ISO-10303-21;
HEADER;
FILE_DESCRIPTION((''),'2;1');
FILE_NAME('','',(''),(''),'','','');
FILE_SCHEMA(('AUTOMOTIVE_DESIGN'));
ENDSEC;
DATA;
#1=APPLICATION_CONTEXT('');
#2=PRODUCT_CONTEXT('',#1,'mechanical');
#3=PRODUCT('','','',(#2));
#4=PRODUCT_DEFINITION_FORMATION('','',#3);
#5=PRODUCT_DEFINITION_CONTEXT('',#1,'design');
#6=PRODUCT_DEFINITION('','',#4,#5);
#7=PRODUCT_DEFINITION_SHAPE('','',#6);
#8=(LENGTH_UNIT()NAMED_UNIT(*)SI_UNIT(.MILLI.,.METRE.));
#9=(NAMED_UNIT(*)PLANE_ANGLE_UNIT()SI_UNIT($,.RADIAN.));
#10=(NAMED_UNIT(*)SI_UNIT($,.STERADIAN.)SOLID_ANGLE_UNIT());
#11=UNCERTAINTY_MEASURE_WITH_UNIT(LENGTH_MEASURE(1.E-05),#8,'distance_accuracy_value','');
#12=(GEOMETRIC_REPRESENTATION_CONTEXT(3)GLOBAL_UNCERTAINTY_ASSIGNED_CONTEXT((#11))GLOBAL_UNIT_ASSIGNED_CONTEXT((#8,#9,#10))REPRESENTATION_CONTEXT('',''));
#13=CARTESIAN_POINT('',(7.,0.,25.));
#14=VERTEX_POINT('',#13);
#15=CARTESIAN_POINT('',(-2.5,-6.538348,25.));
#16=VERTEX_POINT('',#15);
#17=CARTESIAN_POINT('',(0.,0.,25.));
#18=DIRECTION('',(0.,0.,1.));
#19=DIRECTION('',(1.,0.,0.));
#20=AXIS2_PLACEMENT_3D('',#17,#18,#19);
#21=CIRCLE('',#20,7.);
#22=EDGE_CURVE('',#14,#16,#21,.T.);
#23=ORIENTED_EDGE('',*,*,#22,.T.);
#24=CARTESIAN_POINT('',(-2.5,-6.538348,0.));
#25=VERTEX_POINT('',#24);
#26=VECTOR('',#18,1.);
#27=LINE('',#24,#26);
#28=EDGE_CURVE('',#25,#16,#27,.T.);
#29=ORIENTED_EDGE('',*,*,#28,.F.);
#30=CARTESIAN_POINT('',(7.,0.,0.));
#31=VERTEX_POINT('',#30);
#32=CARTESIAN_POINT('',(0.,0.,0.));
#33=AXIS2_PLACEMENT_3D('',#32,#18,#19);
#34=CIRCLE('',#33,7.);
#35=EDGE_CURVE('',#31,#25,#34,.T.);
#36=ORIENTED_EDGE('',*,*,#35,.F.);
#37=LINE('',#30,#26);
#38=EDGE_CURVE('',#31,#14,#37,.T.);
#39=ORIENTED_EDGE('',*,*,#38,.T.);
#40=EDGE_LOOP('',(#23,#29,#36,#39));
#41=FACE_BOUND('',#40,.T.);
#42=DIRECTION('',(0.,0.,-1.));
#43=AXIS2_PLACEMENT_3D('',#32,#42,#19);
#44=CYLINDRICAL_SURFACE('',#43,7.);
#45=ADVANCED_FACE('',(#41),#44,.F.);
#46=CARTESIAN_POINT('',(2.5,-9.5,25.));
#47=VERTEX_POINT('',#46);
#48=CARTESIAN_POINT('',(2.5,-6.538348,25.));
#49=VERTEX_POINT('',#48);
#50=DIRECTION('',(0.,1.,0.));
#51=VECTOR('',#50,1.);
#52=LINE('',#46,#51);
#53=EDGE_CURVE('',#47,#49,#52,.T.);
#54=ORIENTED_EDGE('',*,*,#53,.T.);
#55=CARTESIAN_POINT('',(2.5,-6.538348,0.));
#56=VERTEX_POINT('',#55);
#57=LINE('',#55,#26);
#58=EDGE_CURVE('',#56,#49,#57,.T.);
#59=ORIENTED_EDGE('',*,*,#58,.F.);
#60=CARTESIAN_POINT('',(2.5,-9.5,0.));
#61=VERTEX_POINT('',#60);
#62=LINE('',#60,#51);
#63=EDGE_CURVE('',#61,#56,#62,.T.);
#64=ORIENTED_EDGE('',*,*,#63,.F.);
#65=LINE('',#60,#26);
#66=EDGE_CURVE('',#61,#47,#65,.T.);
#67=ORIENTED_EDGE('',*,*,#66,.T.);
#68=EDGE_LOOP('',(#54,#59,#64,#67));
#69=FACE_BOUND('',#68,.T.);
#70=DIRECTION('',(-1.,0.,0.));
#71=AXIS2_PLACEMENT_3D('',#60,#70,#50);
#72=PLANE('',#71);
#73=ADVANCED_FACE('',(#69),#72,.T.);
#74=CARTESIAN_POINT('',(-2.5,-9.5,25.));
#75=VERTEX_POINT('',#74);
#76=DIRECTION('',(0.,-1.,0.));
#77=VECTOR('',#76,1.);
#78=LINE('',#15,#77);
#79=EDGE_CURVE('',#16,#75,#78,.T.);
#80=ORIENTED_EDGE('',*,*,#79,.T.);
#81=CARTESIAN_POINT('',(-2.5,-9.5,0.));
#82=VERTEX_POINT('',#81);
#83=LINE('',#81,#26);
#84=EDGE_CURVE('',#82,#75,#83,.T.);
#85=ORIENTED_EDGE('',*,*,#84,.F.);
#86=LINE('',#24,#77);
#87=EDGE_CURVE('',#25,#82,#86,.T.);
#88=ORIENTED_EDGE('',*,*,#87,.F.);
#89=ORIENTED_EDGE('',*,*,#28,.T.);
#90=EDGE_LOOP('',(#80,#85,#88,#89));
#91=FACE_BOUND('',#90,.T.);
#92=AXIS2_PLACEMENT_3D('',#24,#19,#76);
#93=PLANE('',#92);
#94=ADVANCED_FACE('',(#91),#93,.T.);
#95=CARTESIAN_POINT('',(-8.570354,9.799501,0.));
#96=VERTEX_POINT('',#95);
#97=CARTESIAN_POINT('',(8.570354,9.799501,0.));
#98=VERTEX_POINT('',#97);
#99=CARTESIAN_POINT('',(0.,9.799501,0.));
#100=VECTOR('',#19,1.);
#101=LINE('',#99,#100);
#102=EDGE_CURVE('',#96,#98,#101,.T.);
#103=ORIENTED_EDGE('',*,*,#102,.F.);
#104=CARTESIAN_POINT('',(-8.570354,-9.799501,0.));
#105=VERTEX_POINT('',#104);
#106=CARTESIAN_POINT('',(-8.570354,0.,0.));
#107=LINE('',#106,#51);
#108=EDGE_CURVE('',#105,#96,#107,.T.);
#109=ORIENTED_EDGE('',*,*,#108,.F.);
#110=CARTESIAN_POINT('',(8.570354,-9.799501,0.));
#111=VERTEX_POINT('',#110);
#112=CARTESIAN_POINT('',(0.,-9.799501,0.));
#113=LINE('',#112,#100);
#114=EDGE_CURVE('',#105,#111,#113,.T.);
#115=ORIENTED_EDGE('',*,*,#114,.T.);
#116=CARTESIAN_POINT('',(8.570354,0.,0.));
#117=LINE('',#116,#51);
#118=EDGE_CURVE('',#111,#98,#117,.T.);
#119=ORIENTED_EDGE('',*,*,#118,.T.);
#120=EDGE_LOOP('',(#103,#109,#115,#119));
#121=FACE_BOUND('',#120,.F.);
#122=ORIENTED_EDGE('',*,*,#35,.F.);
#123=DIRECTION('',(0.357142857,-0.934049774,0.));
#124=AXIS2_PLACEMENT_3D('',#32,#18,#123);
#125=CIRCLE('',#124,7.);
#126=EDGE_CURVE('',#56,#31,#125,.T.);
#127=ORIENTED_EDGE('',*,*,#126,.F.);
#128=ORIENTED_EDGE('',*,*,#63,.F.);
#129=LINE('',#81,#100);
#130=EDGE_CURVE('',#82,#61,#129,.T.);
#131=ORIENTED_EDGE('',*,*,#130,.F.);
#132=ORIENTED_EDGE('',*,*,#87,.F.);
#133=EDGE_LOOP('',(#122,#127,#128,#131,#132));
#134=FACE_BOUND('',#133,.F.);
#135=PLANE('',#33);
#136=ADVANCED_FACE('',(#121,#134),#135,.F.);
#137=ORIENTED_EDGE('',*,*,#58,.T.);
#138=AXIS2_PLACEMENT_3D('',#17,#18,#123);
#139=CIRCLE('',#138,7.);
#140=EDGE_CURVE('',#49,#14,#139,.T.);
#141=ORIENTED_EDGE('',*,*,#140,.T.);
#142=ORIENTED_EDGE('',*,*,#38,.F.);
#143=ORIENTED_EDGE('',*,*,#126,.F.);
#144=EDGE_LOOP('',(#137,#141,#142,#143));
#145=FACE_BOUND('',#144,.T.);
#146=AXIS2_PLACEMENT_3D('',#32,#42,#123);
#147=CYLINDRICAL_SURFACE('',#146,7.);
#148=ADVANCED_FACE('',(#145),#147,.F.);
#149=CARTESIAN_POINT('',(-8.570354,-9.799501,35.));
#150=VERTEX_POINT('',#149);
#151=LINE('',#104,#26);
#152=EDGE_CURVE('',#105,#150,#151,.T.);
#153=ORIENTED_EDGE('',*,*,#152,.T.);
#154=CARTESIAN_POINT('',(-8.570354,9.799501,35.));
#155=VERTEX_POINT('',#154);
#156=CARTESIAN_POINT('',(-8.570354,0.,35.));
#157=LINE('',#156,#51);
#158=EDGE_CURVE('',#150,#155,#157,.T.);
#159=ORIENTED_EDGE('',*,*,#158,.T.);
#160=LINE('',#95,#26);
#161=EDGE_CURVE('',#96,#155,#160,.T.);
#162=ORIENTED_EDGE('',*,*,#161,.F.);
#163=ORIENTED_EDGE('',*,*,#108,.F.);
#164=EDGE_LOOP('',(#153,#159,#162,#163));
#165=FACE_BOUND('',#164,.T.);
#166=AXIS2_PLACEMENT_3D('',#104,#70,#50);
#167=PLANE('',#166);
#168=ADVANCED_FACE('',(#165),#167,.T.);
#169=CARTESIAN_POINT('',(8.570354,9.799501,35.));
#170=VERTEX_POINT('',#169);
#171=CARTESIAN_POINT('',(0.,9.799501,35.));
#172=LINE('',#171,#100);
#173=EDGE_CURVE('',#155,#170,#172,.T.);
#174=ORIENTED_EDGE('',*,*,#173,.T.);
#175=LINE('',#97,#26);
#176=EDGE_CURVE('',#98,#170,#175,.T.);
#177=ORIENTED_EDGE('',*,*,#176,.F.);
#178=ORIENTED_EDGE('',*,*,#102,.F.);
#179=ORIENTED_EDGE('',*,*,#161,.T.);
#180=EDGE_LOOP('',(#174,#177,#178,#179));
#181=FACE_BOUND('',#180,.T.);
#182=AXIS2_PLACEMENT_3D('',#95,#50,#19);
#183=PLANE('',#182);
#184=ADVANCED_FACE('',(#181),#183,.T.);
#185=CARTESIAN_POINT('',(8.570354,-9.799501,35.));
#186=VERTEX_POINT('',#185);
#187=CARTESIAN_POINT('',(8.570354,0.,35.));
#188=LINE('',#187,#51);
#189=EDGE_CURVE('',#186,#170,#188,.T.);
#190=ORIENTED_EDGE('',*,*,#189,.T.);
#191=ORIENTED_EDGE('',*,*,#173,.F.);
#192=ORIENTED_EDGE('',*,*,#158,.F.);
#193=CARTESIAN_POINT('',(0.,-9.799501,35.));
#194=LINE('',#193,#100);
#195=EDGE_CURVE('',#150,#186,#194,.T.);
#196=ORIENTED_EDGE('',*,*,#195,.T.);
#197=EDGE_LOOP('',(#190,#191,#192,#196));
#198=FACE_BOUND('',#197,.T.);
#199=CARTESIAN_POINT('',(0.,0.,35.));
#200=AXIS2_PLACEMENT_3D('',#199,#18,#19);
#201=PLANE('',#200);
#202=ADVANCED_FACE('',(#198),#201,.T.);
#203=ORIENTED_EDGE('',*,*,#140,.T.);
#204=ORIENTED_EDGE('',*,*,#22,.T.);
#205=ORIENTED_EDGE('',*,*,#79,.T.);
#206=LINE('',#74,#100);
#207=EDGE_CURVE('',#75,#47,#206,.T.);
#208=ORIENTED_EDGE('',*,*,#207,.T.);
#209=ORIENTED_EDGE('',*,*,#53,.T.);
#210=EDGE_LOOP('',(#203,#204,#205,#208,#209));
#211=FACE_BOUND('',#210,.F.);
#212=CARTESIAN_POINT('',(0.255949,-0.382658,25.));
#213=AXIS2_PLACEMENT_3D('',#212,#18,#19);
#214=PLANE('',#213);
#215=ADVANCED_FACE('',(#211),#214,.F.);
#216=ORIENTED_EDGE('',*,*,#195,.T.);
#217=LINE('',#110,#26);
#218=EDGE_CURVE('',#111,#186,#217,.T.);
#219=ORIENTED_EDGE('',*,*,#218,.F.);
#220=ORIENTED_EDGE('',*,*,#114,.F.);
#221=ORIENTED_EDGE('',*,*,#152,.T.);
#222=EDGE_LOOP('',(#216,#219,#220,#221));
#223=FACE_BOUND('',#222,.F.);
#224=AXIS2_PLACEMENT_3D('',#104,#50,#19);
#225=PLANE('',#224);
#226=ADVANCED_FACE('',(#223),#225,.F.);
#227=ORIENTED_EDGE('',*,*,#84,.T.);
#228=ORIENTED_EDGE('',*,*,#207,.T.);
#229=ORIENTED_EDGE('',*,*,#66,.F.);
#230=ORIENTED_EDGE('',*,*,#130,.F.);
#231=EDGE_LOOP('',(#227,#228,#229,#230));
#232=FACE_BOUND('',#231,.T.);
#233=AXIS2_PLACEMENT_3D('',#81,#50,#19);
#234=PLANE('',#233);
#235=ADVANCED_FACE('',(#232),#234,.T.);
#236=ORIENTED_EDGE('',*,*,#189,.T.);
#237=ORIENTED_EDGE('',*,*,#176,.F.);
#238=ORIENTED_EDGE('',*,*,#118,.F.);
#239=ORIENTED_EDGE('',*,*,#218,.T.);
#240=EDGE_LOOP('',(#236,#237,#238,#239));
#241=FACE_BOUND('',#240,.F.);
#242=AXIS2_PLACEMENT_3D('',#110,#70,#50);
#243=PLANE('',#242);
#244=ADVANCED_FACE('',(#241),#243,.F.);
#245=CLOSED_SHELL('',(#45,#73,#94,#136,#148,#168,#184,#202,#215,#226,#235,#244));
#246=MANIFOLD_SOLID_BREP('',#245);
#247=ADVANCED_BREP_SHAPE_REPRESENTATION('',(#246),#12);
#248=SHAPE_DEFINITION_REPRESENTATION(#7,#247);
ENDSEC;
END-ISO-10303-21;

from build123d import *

# Parameters (mm, degrees)
F0_W     = 17.1407087726
F0_H     = 19.5990015107
F1_DEPTH = 35
F2_DEPTH = 25


with BuildPart() as f1:
    # F0 (on Top) → F1 (new body)
    with BuildSketch(Plane.XY):
        Rectangle(F0_W, F0_H)
        with BuildLine():
            ThreePointArc((-2.5, -6.5383484153), (-3.9686269666, 5.7662812973), (7, 0))
            ThreePointArc((7, 0), (5.7662812973, -3.9686269666), (2.5, -6.5383484153))
            Line((2.5, -6.5383484153), (2.5, -9.5))
            Line((2.5, -9.5), (0, -9.5))
            Line((0, -9.5), (-2.5, -9.5))
            Line((-2.5, -9.5), (-2.5, -6.5383484153))
        make_face(mode=Mode.SUBTRACT)
        with BuildLine():
            ThreePointArc((2.5, -6.5383484153), (5.7662812973, -3.9686269666), (7, 0))
            ThreePointArc((7, 0), (-3.9686269666, 5.7662812973), (-2.5, -6.5383484153))
            ThreePointArc((-2.5, -6.5383484153), (0, -7), (2.5, -6.5383484153))
        make_face()
        with BuildLine():
            ThreePointArc((2.5, -6.5383484153), (0, -7), (-2.5, -6.5383484153))
            Line((-2.5, -6.5383484153), (-2.5, -9.5))
            Line((-2.5, -9.5), (0, -9.5))
            Line((0, -9.5), (2.5, -9.5))
            Line((2.5, -9.5), (2.5, -6.5383484153))
        make_face()
    extrude(amount=F1_DEPTH)

    # F0 (on Top) → F2 (cut)
    with BuildSketch(Plane.XY):
        with BuildLine():
            ThreePointArc((2.5, -6.5383484153), (5.7662812973, -3.9686269666), (7, 0))
            ThreePointArc((7, 0), (-3.9686269666, 5.7662812973), (-2.5, -6.5383484153))
            ThreePointArc((-2.5, -6.5383484153), (0, -7), (2.5, -6.5383484153))
        make_face()
        with BuildLine():
            ThreePointArc((2.5, -6.5383484153), (0, -7), (-2.5, -6.5383484153))
            Line((-2.5, -6.5383484153), (-2.5, -9.5))
            Line((-2.5, -9.5), (0, -9.5))
            Line((0, -9.5), (2.5, -9.5))
            Line((2.5, -9.5), (2.5, -6.5383484153))
        make_face()
    extrude(amount=F2_DEPTH, mode=Mode.SUBTRACT)


solid = f1.part
